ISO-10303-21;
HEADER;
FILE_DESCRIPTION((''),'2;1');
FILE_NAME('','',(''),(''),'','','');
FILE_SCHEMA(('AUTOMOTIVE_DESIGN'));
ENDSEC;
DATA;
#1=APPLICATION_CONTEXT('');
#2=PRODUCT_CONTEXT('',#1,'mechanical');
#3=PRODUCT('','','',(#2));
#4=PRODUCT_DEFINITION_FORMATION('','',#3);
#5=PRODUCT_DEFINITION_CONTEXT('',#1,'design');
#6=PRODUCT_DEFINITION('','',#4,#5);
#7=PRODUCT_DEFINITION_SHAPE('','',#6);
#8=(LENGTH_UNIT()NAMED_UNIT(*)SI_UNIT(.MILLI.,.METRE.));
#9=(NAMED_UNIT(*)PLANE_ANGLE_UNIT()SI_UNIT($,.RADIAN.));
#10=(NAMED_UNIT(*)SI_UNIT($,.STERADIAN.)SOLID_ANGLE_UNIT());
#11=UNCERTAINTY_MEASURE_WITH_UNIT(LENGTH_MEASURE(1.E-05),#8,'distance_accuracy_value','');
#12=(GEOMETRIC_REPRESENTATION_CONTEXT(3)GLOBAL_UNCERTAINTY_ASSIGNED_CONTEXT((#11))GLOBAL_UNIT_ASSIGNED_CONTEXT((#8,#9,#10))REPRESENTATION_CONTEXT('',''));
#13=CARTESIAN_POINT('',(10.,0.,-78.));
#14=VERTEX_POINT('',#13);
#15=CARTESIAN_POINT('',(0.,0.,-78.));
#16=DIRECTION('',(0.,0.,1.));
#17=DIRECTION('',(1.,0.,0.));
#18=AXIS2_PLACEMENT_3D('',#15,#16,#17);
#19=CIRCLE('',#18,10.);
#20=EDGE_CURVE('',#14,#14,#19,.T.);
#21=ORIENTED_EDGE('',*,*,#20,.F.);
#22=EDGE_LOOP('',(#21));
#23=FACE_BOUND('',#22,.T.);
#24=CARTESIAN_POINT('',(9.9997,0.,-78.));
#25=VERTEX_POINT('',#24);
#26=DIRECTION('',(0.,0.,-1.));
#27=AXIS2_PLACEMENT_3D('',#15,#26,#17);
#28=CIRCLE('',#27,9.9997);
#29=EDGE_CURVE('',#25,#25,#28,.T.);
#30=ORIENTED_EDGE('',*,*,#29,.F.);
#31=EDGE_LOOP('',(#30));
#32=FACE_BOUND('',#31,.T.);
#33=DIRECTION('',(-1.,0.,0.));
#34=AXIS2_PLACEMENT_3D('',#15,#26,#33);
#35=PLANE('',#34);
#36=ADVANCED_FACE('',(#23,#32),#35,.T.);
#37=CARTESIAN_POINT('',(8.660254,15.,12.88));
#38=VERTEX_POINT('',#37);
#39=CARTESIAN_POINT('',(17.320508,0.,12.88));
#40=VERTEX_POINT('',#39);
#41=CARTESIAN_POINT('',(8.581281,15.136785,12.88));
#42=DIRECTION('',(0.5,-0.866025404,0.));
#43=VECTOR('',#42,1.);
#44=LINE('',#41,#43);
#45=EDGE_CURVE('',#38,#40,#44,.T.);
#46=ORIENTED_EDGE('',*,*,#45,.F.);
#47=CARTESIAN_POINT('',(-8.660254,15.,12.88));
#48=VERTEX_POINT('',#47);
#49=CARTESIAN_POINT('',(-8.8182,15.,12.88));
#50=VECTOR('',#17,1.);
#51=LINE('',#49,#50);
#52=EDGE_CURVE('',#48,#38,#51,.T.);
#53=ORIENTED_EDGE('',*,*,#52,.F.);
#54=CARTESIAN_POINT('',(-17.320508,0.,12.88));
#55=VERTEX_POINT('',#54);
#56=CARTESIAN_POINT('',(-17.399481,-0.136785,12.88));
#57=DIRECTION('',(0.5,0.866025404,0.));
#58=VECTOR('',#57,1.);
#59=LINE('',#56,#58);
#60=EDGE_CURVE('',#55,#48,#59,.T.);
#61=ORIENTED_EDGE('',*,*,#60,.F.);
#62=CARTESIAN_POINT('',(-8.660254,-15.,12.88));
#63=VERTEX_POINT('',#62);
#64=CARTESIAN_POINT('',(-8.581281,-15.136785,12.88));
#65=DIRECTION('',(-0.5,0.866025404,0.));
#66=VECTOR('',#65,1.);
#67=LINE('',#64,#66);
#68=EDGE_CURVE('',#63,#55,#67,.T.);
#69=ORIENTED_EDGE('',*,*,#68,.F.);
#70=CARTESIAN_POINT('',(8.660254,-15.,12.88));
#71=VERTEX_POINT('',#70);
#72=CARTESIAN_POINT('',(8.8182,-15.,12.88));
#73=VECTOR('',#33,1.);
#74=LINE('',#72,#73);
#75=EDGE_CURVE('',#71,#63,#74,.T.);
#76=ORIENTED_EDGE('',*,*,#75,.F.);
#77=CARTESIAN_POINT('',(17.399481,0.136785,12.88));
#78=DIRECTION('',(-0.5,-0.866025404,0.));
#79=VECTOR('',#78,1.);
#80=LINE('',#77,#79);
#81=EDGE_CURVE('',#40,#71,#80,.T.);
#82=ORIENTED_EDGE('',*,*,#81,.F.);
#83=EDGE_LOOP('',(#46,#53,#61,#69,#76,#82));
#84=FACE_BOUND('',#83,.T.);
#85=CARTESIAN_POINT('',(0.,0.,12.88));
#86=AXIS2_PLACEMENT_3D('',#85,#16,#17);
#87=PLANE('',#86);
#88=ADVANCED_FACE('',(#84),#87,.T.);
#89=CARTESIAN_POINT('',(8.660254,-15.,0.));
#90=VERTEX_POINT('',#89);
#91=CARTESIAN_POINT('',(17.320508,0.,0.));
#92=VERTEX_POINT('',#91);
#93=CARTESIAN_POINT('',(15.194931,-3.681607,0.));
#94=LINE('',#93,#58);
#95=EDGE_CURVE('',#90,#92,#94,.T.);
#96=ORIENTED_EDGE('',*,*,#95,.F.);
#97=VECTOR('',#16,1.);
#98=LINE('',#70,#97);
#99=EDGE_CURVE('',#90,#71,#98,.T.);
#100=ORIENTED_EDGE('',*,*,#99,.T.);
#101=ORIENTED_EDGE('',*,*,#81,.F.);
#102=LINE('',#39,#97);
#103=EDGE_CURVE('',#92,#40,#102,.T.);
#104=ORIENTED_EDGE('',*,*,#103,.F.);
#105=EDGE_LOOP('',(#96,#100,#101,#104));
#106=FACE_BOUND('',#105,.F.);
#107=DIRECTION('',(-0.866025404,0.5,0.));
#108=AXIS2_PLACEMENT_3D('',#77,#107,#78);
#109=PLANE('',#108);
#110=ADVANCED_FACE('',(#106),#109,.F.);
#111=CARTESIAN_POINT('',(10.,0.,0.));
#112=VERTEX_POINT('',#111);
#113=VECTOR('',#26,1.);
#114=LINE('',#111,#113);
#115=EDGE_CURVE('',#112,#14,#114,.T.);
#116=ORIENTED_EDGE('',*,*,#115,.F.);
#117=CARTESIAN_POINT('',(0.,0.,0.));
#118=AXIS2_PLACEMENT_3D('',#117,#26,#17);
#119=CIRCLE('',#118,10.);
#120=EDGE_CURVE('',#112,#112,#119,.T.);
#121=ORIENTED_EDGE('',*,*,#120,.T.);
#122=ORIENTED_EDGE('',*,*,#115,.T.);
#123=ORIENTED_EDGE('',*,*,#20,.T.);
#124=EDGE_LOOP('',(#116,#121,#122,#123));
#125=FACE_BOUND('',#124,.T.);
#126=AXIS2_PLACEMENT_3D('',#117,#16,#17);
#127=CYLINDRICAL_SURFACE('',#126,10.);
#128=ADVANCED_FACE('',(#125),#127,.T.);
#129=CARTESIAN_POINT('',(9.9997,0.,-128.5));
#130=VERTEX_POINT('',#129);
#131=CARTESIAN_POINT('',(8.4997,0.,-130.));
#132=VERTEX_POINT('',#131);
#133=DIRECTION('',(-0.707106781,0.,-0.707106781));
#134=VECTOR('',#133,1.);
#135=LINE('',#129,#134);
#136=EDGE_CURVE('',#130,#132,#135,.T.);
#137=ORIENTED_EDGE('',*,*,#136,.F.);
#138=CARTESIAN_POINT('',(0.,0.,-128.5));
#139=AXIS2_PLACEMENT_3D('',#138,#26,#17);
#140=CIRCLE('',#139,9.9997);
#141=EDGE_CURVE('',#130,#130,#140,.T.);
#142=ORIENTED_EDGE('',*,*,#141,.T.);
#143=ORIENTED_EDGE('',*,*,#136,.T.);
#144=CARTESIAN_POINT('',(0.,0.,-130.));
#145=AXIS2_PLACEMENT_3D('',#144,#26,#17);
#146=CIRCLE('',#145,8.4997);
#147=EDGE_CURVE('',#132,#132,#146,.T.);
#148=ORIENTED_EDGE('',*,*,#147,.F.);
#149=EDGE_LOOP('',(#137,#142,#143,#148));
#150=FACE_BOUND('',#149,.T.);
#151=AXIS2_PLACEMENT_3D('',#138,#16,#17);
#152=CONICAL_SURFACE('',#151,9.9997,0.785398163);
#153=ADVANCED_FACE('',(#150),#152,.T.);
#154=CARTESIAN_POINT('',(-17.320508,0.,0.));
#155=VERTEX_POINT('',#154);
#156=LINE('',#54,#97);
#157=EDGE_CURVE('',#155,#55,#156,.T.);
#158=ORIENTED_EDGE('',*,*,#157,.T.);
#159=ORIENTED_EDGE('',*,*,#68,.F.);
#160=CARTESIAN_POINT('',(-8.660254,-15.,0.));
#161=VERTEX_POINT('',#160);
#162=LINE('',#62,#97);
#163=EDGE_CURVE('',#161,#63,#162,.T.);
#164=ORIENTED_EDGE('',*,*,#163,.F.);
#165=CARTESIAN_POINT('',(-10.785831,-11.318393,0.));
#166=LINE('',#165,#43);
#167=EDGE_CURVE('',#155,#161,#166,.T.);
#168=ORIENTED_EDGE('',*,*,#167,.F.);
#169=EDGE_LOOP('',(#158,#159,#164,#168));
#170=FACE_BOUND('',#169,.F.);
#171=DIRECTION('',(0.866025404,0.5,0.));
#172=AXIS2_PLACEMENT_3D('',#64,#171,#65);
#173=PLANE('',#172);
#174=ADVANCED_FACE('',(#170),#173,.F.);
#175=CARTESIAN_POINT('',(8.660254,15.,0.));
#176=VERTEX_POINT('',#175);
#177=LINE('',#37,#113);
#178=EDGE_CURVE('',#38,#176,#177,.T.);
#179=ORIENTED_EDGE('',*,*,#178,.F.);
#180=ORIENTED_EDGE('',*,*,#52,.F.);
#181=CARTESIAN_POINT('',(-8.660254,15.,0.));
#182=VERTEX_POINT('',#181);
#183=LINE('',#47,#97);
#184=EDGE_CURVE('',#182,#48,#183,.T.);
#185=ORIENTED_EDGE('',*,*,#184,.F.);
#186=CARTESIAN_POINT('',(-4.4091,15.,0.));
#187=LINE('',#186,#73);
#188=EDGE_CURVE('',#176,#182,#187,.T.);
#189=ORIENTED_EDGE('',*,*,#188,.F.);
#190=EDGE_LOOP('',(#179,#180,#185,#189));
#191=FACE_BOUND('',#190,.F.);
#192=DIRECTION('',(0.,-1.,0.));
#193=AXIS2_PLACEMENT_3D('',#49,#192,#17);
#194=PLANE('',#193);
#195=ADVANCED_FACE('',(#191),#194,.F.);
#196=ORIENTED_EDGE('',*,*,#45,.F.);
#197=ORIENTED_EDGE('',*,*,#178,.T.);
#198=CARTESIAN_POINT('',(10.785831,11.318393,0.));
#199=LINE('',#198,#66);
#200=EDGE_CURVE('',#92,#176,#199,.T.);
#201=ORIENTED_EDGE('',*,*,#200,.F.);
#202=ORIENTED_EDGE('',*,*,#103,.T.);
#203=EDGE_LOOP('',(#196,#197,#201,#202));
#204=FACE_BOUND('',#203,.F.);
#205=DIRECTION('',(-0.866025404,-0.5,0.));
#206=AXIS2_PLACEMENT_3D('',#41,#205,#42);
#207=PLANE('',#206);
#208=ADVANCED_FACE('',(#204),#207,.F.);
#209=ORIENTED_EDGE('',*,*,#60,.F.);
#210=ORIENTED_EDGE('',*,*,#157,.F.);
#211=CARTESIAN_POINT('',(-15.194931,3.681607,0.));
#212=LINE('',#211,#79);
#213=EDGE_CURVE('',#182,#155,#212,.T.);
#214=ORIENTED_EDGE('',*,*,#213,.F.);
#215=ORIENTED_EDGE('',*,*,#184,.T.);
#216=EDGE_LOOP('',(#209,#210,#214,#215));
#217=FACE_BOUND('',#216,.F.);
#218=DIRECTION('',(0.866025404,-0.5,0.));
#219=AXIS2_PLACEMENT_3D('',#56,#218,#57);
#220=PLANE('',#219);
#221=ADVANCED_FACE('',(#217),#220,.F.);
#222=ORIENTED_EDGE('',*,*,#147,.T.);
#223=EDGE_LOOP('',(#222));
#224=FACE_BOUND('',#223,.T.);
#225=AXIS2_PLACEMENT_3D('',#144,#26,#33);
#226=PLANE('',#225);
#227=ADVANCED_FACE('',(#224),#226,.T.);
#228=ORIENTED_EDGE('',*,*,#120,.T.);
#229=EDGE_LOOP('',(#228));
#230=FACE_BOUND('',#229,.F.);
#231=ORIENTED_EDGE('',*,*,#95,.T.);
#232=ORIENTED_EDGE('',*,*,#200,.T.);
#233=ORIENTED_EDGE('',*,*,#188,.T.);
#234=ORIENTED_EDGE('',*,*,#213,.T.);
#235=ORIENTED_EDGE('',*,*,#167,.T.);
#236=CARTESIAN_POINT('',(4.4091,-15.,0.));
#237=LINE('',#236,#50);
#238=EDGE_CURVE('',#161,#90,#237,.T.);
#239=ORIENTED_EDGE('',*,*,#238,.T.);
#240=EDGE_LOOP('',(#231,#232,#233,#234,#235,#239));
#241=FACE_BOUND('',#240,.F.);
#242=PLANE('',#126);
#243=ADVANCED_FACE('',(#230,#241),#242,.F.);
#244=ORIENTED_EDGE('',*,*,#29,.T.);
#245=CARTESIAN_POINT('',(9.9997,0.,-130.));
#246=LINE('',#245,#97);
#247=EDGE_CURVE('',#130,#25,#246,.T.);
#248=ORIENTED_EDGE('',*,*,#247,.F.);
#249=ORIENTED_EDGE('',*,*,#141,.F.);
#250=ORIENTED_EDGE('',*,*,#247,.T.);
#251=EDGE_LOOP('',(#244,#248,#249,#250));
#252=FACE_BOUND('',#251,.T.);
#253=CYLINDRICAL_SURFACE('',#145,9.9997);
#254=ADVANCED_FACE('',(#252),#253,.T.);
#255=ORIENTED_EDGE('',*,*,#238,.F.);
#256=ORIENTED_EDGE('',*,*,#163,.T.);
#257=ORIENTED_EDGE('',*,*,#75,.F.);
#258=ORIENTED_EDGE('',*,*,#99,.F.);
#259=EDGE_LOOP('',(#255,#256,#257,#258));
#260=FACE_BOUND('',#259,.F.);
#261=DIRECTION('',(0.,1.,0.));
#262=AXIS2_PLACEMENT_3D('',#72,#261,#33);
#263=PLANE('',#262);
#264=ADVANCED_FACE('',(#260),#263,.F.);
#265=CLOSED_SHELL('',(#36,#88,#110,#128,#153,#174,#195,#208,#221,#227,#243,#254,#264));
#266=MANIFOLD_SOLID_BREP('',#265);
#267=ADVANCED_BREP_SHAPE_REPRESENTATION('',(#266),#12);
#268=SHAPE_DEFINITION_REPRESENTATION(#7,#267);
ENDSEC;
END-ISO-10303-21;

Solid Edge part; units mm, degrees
sketch "Sketch1" plane through (0, 0, 0) normal (0, 0, 1) x (1, 0, 0)
  circle A0 centre (0, 0) radius 17.4
  dimension "D1" = 34.8
extrude "Protrusion1" add sketch "Sketch1" along normal blind 12.88
sketch "Sketch2" plane through (0, 0, 0) normal (0, 0, -1) x (1, 0, 0)
  circle A0 centre (0, 0) radius 10
extrude "Protrusion2" add sketch "Sketch2" along normal blind 130
sketch "Sketch3" plane through (0, 0, -130) normal (0, 0, -1) x (1, 0, 0)
  circle A0 centre (0, 0) radius 9.9997
extrude "Cutout1" cut sketch "Sketch3" against normal blind 52 flip side to cut
chamfer "Chamfer_1" distance 1.5 angle 45 1 edges at (-9.9997, 0, -130)
sketch "Sketch4" plane through (0, 0, 12.88) normal (0, 0, 1) x (1, 0, 0)
  line L0 (-8.8182, 15) -> (8.8182, 15)
  dimension "D1" = 30
extrude "Cutout2" cut sketch "Sketch4" against normal up to next material side at (0, 15.05, 12.88)
pattern_circular "Pattern1" count 6 over 360 about axis through (0, 0, 12.88) along (0, 0, 1) of "Cutout2"
properties part number "24104891"
